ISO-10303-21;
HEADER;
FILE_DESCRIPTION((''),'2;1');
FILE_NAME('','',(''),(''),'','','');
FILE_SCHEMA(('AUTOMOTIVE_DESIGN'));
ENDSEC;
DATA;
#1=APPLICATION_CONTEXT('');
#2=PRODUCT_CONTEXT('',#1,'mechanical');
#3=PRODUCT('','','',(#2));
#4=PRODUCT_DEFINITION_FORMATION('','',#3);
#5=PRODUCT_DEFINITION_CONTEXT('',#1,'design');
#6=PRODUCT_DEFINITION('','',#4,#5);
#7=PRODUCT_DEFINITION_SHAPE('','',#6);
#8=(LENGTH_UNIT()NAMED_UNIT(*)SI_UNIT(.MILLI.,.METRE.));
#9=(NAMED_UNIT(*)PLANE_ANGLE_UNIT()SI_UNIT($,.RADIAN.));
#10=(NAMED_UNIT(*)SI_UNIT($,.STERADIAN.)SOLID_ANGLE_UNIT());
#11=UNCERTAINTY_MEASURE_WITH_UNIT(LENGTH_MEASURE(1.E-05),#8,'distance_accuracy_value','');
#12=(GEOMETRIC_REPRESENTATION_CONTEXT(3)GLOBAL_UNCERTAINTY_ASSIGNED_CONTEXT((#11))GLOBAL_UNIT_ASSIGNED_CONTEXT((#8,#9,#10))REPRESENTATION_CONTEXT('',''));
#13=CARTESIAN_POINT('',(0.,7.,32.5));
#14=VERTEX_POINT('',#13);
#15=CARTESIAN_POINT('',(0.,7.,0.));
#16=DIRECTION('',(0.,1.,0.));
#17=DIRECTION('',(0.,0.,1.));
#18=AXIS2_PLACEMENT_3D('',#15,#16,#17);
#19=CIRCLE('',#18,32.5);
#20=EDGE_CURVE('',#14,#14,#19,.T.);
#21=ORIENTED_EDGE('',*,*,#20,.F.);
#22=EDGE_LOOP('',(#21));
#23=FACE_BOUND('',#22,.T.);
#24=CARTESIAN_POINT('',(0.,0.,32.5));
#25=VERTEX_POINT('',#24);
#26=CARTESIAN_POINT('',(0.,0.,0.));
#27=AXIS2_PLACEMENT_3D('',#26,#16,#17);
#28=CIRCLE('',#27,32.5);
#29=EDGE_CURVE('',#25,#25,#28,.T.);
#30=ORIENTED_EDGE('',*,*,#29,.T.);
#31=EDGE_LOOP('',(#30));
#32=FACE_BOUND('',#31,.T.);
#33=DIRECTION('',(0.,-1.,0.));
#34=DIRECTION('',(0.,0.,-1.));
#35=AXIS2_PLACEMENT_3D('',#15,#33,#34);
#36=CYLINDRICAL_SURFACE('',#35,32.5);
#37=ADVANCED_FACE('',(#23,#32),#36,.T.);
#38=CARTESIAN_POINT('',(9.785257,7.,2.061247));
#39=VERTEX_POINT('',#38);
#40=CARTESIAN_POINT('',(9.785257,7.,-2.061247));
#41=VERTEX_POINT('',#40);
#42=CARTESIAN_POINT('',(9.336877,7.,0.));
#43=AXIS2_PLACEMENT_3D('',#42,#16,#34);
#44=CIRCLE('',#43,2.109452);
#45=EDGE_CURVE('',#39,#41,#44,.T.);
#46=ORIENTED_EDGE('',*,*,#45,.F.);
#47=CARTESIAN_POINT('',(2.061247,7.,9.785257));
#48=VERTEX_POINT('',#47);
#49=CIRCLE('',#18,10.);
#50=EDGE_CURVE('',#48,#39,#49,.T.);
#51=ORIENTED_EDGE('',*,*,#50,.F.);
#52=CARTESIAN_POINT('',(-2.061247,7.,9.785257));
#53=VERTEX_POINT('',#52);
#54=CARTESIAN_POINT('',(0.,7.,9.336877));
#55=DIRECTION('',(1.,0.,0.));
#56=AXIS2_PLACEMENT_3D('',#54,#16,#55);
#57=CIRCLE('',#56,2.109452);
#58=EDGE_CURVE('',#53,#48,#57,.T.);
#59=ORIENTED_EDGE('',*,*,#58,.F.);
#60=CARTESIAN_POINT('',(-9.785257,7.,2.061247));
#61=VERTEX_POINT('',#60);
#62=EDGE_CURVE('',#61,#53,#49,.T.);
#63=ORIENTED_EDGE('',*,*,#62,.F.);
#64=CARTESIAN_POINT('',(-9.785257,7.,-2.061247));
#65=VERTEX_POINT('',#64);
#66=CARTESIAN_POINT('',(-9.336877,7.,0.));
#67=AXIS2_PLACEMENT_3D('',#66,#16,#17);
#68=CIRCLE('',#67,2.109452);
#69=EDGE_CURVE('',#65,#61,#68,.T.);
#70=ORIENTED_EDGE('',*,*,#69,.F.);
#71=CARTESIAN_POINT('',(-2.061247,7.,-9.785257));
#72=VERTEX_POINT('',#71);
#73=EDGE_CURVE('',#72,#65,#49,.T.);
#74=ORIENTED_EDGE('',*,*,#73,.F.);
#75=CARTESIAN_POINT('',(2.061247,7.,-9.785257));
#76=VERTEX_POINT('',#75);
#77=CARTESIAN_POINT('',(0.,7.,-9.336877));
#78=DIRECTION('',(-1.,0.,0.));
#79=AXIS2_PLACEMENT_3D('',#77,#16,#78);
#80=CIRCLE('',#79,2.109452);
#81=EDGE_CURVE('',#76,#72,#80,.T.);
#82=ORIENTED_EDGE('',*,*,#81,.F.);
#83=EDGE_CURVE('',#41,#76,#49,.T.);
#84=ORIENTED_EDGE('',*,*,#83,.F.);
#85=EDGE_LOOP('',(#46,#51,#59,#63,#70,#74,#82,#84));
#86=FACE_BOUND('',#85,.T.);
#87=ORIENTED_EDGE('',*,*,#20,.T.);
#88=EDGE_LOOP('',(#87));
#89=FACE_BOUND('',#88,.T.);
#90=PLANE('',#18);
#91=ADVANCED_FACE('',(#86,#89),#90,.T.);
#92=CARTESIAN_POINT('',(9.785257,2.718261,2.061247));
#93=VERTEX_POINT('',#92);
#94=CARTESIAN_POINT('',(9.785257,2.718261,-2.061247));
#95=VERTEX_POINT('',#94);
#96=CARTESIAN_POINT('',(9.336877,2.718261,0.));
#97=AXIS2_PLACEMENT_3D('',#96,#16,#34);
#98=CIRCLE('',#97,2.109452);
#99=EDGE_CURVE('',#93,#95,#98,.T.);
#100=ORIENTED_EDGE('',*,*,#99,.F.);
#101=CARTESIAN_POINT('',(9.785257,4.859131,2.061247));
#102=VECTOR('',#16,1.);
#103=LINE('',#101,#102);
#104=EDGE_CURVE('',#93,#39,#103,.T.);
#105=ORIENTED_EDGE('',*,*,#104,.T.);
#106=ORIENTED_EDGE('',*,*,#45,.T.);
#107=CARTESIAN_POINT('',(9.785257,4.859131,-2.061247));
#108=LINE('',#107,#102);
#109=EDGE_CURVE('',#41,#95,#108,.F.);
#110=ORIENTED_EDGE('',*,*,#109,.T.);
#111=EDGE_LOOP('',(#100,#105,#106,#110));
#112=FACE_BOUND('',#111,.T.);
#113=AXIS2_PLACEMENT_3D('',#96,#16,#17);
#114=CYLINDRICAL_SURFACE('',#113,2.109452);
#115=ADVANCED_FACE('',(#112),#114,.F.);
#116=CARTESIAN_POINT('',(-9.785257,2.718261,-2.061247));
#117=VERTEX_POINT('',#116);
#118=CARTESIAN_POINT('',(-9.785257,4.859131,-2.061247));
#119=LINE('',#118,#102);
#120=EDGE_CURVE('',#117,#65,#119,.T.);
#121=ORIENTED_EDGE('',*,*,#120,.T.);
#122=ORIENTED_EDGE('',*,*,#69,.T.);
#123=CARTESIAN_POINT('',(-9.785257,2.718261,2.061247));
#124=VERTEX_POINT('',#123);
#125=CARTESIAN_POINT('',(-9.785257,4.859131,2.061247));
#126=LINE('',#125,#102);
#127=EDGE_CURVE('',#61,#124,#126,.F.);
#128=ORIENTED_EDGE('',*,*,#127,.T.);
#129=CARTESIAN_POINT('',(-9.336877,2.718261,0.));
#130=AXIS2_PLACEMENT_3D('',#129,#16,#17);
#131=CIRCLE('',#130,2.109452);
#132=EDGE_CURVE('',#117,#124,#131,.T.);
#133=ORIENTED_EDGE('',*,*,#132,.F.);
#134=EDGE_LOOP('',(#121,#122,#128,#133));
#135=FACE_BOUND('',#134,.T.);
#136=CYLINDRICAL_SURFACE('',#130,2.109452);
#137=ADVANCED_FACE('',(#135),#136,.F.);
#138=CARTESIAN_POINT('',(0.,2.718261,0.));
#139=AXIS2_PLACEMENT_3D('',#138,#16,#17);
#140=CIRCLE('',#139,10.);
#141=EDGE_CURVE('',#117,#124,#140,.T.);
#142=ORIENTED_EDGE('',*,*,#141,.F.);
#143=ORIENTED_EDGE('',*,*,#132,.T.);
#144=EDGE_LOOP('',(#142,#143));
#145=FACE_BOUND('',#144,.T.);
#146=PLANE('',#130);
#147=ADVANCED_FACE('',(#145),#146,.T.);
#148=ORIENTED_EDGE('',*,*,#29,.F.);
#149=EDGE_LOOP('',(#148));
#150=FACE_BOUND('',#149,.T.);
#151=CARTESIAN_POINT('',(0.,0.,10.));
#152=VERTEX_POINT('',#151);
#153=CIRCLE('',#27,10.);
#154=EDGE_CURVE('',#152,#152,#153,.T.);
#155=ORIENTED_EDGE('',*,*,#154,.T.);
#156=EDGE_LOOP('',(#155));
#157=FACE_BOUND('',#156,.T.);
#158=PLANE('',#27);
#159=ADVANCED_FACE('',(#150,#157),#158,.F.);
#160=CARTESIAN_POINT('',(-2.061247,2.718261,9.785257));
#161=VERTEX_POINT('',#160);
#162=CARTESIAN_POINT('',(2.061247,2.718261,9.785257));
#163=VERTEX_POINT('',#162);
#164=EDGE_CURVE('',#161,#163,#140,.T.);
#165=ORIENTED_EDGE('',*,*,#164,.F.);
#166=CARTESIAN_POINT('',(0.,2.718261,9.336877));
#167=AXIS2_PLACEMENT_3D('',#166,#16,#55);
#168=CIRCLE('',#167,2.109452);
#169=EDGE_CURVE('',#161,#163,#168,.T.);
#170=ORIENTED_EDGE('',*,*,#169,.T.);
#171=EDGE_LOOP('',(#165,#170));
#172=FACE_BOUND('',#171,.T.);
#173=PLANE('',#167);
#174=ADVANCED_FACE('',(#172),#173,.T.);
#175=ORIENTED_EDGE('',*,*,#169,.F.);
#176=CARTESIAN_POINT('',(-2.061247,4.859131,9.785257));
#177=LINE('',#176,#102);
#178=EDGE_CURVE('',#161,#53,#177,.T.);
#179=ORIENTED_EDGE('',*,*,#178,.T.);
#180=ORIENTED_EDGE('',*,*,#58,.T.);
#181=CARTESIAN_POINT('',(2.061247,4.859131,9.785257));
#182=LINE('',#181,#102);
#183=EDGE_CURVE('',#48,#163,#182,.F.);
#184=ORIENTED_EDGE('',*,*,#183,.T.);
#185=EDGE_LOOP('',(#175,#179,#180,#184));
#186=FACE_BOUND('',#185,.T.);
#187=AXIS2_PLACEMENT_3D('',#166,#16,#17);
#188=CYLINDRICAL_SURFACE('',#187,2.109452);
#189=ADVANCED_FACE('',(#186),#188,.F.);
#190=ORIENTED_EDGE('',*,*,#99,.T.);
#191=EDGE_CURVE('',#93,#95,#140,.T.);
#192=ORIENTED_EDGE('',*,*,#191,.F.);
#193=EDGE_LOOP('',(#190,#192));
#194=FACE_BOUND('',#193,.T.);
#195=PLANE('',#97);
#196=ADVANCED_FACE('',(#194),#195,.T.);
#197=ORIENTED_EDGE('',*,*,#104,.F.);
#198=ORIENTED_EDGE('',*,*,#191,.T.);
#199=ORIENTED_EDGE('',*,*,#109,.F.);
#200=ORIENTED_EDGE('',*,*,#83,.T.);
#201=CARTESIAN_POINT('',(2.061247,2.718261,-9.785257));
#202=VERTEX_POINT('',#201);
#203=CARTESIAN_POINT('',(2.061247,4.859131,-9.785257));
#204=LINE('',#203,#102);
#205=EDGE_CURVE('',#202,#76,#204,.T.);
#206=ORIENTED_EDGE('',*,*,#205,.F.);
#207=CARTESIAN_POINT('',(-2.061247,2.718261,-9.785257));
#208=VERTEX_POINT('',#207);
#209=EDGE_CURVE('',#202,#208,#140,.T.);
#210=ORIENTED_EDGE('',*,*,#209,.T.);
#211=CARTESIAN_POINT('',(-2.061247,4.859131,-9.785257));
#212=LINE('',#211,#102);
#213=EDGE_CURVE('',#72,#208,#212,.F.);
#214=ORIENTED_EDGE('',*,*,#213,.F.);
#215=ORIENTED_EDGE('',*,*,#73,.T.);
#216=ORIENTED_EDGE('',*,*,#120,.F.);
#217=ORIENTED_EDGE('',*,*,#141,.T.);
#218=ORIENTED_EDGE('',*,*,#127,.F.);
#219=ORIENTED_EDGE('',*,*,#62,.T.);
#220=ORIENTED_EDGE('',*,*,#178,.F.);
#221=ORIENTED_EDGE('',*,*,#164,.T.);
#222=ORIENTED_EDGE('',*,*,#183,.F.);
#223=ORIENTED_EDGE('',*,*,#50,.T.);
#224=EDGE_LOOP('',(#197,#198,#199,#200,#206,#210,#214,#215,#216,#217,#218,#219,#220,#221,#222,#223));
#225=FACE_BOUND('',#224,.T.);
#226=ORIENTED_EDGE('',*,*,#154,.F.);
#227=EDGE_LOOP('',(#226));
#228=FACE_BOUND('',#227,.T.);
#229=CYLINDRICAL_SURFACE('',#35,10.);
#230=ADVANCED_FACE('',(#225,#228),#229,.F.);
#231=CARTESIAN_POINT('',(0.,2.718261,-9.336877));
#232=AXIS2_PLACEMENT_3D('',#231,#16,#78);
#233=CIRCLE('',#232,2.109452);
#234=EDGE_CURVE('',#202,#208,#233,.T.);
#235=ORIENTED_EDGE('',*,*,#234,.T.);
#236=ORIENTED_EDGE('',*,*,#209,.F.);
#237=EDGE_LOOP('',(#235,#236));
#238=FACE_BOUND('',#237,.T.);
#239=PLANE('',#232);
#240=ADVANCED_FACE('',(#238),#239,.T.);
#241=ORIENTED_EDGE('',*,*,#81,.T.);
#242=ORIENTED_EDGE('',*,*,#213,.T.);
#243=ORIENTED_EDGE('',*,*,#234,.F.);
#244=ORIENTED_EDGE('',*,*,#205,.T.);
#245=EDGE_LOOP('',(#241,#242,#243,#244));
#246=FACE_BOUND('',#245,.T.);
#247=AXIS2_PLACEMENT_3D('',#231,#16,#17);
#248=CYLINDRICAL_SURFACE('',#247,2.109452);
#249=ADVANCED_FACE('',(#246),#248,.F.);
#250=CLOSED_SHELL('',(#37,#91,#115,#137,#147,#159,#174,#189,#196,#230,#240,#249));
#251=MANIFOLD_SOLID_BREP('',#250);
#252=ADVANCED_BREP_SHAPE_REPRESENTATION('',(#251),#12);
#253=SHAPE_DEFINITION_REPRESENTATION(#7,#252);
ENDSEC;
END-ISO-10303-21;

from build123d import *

# Parameters (mm, degrees)
SKETCH1_R           = 32.5
BOSS_EXTRUDE1_DEPTH = 7
SKETCH2_R           = 10
CUT_EXTRUDE1_DEPTH  = 47.491934784
SKETCH3_R           = 2.109451552
CUT_EXTRUDE2_DEPTH  = 4.281738984
CIRPATTERN1_COUNT   = 4


with BuildPart() as part:
    # Sketch1 → Boss-Extrude1 (new body)
    with BuildSketch(Plane(origin=(0, 0, 0), x_dir=(1, 0, 0), z_dir=(0, 1, 0))):
        Circle(SKETCH1_R)
    extrude(amount=BOSS_EXTRUDE1_DEPTH)

    # Sketch2 → Cut-Extrude1 (cut, through all)
    with BuildSketch(Plane(origin=(0, 0, 0), x_dir=(1, 0, 0), z_dir=(0, 1, 0))):
        Circle(SKETCH2_R)
    extrude(amount=CUT_EXTRUDE1_DEPTH, mode=Mode.SUBTRACT)

    # Sketch3 → Cut-Extrude2 (cut)
    with BuildSketch(Plane(origin=(0, 7, 0), x_dir=(1, 0, 0), z_dir=(0, 1, 0))):
        with Locations((-9.336876644, 0)):
            Circle(SKETCH3_R)
    cut_extrude2 = extrude(amount=-CUT_EXTRUDE2_DEPTH, mode=Mode.SUBTRACT)

    # CirPattern1: Cut-Extrude2 ×4 about axis
    cirpattern1_axis = Axis((0, 0, 0), (0, 1, 0))
    for i in range(1, CIRPATTERN1_COUNT):
        add(cut_extrude2.rotate(cirpattern1_axis, i * 360 / CIRPATTERN1_COUNT), mode=Mode.SUBTRACT)


solid = part.part
